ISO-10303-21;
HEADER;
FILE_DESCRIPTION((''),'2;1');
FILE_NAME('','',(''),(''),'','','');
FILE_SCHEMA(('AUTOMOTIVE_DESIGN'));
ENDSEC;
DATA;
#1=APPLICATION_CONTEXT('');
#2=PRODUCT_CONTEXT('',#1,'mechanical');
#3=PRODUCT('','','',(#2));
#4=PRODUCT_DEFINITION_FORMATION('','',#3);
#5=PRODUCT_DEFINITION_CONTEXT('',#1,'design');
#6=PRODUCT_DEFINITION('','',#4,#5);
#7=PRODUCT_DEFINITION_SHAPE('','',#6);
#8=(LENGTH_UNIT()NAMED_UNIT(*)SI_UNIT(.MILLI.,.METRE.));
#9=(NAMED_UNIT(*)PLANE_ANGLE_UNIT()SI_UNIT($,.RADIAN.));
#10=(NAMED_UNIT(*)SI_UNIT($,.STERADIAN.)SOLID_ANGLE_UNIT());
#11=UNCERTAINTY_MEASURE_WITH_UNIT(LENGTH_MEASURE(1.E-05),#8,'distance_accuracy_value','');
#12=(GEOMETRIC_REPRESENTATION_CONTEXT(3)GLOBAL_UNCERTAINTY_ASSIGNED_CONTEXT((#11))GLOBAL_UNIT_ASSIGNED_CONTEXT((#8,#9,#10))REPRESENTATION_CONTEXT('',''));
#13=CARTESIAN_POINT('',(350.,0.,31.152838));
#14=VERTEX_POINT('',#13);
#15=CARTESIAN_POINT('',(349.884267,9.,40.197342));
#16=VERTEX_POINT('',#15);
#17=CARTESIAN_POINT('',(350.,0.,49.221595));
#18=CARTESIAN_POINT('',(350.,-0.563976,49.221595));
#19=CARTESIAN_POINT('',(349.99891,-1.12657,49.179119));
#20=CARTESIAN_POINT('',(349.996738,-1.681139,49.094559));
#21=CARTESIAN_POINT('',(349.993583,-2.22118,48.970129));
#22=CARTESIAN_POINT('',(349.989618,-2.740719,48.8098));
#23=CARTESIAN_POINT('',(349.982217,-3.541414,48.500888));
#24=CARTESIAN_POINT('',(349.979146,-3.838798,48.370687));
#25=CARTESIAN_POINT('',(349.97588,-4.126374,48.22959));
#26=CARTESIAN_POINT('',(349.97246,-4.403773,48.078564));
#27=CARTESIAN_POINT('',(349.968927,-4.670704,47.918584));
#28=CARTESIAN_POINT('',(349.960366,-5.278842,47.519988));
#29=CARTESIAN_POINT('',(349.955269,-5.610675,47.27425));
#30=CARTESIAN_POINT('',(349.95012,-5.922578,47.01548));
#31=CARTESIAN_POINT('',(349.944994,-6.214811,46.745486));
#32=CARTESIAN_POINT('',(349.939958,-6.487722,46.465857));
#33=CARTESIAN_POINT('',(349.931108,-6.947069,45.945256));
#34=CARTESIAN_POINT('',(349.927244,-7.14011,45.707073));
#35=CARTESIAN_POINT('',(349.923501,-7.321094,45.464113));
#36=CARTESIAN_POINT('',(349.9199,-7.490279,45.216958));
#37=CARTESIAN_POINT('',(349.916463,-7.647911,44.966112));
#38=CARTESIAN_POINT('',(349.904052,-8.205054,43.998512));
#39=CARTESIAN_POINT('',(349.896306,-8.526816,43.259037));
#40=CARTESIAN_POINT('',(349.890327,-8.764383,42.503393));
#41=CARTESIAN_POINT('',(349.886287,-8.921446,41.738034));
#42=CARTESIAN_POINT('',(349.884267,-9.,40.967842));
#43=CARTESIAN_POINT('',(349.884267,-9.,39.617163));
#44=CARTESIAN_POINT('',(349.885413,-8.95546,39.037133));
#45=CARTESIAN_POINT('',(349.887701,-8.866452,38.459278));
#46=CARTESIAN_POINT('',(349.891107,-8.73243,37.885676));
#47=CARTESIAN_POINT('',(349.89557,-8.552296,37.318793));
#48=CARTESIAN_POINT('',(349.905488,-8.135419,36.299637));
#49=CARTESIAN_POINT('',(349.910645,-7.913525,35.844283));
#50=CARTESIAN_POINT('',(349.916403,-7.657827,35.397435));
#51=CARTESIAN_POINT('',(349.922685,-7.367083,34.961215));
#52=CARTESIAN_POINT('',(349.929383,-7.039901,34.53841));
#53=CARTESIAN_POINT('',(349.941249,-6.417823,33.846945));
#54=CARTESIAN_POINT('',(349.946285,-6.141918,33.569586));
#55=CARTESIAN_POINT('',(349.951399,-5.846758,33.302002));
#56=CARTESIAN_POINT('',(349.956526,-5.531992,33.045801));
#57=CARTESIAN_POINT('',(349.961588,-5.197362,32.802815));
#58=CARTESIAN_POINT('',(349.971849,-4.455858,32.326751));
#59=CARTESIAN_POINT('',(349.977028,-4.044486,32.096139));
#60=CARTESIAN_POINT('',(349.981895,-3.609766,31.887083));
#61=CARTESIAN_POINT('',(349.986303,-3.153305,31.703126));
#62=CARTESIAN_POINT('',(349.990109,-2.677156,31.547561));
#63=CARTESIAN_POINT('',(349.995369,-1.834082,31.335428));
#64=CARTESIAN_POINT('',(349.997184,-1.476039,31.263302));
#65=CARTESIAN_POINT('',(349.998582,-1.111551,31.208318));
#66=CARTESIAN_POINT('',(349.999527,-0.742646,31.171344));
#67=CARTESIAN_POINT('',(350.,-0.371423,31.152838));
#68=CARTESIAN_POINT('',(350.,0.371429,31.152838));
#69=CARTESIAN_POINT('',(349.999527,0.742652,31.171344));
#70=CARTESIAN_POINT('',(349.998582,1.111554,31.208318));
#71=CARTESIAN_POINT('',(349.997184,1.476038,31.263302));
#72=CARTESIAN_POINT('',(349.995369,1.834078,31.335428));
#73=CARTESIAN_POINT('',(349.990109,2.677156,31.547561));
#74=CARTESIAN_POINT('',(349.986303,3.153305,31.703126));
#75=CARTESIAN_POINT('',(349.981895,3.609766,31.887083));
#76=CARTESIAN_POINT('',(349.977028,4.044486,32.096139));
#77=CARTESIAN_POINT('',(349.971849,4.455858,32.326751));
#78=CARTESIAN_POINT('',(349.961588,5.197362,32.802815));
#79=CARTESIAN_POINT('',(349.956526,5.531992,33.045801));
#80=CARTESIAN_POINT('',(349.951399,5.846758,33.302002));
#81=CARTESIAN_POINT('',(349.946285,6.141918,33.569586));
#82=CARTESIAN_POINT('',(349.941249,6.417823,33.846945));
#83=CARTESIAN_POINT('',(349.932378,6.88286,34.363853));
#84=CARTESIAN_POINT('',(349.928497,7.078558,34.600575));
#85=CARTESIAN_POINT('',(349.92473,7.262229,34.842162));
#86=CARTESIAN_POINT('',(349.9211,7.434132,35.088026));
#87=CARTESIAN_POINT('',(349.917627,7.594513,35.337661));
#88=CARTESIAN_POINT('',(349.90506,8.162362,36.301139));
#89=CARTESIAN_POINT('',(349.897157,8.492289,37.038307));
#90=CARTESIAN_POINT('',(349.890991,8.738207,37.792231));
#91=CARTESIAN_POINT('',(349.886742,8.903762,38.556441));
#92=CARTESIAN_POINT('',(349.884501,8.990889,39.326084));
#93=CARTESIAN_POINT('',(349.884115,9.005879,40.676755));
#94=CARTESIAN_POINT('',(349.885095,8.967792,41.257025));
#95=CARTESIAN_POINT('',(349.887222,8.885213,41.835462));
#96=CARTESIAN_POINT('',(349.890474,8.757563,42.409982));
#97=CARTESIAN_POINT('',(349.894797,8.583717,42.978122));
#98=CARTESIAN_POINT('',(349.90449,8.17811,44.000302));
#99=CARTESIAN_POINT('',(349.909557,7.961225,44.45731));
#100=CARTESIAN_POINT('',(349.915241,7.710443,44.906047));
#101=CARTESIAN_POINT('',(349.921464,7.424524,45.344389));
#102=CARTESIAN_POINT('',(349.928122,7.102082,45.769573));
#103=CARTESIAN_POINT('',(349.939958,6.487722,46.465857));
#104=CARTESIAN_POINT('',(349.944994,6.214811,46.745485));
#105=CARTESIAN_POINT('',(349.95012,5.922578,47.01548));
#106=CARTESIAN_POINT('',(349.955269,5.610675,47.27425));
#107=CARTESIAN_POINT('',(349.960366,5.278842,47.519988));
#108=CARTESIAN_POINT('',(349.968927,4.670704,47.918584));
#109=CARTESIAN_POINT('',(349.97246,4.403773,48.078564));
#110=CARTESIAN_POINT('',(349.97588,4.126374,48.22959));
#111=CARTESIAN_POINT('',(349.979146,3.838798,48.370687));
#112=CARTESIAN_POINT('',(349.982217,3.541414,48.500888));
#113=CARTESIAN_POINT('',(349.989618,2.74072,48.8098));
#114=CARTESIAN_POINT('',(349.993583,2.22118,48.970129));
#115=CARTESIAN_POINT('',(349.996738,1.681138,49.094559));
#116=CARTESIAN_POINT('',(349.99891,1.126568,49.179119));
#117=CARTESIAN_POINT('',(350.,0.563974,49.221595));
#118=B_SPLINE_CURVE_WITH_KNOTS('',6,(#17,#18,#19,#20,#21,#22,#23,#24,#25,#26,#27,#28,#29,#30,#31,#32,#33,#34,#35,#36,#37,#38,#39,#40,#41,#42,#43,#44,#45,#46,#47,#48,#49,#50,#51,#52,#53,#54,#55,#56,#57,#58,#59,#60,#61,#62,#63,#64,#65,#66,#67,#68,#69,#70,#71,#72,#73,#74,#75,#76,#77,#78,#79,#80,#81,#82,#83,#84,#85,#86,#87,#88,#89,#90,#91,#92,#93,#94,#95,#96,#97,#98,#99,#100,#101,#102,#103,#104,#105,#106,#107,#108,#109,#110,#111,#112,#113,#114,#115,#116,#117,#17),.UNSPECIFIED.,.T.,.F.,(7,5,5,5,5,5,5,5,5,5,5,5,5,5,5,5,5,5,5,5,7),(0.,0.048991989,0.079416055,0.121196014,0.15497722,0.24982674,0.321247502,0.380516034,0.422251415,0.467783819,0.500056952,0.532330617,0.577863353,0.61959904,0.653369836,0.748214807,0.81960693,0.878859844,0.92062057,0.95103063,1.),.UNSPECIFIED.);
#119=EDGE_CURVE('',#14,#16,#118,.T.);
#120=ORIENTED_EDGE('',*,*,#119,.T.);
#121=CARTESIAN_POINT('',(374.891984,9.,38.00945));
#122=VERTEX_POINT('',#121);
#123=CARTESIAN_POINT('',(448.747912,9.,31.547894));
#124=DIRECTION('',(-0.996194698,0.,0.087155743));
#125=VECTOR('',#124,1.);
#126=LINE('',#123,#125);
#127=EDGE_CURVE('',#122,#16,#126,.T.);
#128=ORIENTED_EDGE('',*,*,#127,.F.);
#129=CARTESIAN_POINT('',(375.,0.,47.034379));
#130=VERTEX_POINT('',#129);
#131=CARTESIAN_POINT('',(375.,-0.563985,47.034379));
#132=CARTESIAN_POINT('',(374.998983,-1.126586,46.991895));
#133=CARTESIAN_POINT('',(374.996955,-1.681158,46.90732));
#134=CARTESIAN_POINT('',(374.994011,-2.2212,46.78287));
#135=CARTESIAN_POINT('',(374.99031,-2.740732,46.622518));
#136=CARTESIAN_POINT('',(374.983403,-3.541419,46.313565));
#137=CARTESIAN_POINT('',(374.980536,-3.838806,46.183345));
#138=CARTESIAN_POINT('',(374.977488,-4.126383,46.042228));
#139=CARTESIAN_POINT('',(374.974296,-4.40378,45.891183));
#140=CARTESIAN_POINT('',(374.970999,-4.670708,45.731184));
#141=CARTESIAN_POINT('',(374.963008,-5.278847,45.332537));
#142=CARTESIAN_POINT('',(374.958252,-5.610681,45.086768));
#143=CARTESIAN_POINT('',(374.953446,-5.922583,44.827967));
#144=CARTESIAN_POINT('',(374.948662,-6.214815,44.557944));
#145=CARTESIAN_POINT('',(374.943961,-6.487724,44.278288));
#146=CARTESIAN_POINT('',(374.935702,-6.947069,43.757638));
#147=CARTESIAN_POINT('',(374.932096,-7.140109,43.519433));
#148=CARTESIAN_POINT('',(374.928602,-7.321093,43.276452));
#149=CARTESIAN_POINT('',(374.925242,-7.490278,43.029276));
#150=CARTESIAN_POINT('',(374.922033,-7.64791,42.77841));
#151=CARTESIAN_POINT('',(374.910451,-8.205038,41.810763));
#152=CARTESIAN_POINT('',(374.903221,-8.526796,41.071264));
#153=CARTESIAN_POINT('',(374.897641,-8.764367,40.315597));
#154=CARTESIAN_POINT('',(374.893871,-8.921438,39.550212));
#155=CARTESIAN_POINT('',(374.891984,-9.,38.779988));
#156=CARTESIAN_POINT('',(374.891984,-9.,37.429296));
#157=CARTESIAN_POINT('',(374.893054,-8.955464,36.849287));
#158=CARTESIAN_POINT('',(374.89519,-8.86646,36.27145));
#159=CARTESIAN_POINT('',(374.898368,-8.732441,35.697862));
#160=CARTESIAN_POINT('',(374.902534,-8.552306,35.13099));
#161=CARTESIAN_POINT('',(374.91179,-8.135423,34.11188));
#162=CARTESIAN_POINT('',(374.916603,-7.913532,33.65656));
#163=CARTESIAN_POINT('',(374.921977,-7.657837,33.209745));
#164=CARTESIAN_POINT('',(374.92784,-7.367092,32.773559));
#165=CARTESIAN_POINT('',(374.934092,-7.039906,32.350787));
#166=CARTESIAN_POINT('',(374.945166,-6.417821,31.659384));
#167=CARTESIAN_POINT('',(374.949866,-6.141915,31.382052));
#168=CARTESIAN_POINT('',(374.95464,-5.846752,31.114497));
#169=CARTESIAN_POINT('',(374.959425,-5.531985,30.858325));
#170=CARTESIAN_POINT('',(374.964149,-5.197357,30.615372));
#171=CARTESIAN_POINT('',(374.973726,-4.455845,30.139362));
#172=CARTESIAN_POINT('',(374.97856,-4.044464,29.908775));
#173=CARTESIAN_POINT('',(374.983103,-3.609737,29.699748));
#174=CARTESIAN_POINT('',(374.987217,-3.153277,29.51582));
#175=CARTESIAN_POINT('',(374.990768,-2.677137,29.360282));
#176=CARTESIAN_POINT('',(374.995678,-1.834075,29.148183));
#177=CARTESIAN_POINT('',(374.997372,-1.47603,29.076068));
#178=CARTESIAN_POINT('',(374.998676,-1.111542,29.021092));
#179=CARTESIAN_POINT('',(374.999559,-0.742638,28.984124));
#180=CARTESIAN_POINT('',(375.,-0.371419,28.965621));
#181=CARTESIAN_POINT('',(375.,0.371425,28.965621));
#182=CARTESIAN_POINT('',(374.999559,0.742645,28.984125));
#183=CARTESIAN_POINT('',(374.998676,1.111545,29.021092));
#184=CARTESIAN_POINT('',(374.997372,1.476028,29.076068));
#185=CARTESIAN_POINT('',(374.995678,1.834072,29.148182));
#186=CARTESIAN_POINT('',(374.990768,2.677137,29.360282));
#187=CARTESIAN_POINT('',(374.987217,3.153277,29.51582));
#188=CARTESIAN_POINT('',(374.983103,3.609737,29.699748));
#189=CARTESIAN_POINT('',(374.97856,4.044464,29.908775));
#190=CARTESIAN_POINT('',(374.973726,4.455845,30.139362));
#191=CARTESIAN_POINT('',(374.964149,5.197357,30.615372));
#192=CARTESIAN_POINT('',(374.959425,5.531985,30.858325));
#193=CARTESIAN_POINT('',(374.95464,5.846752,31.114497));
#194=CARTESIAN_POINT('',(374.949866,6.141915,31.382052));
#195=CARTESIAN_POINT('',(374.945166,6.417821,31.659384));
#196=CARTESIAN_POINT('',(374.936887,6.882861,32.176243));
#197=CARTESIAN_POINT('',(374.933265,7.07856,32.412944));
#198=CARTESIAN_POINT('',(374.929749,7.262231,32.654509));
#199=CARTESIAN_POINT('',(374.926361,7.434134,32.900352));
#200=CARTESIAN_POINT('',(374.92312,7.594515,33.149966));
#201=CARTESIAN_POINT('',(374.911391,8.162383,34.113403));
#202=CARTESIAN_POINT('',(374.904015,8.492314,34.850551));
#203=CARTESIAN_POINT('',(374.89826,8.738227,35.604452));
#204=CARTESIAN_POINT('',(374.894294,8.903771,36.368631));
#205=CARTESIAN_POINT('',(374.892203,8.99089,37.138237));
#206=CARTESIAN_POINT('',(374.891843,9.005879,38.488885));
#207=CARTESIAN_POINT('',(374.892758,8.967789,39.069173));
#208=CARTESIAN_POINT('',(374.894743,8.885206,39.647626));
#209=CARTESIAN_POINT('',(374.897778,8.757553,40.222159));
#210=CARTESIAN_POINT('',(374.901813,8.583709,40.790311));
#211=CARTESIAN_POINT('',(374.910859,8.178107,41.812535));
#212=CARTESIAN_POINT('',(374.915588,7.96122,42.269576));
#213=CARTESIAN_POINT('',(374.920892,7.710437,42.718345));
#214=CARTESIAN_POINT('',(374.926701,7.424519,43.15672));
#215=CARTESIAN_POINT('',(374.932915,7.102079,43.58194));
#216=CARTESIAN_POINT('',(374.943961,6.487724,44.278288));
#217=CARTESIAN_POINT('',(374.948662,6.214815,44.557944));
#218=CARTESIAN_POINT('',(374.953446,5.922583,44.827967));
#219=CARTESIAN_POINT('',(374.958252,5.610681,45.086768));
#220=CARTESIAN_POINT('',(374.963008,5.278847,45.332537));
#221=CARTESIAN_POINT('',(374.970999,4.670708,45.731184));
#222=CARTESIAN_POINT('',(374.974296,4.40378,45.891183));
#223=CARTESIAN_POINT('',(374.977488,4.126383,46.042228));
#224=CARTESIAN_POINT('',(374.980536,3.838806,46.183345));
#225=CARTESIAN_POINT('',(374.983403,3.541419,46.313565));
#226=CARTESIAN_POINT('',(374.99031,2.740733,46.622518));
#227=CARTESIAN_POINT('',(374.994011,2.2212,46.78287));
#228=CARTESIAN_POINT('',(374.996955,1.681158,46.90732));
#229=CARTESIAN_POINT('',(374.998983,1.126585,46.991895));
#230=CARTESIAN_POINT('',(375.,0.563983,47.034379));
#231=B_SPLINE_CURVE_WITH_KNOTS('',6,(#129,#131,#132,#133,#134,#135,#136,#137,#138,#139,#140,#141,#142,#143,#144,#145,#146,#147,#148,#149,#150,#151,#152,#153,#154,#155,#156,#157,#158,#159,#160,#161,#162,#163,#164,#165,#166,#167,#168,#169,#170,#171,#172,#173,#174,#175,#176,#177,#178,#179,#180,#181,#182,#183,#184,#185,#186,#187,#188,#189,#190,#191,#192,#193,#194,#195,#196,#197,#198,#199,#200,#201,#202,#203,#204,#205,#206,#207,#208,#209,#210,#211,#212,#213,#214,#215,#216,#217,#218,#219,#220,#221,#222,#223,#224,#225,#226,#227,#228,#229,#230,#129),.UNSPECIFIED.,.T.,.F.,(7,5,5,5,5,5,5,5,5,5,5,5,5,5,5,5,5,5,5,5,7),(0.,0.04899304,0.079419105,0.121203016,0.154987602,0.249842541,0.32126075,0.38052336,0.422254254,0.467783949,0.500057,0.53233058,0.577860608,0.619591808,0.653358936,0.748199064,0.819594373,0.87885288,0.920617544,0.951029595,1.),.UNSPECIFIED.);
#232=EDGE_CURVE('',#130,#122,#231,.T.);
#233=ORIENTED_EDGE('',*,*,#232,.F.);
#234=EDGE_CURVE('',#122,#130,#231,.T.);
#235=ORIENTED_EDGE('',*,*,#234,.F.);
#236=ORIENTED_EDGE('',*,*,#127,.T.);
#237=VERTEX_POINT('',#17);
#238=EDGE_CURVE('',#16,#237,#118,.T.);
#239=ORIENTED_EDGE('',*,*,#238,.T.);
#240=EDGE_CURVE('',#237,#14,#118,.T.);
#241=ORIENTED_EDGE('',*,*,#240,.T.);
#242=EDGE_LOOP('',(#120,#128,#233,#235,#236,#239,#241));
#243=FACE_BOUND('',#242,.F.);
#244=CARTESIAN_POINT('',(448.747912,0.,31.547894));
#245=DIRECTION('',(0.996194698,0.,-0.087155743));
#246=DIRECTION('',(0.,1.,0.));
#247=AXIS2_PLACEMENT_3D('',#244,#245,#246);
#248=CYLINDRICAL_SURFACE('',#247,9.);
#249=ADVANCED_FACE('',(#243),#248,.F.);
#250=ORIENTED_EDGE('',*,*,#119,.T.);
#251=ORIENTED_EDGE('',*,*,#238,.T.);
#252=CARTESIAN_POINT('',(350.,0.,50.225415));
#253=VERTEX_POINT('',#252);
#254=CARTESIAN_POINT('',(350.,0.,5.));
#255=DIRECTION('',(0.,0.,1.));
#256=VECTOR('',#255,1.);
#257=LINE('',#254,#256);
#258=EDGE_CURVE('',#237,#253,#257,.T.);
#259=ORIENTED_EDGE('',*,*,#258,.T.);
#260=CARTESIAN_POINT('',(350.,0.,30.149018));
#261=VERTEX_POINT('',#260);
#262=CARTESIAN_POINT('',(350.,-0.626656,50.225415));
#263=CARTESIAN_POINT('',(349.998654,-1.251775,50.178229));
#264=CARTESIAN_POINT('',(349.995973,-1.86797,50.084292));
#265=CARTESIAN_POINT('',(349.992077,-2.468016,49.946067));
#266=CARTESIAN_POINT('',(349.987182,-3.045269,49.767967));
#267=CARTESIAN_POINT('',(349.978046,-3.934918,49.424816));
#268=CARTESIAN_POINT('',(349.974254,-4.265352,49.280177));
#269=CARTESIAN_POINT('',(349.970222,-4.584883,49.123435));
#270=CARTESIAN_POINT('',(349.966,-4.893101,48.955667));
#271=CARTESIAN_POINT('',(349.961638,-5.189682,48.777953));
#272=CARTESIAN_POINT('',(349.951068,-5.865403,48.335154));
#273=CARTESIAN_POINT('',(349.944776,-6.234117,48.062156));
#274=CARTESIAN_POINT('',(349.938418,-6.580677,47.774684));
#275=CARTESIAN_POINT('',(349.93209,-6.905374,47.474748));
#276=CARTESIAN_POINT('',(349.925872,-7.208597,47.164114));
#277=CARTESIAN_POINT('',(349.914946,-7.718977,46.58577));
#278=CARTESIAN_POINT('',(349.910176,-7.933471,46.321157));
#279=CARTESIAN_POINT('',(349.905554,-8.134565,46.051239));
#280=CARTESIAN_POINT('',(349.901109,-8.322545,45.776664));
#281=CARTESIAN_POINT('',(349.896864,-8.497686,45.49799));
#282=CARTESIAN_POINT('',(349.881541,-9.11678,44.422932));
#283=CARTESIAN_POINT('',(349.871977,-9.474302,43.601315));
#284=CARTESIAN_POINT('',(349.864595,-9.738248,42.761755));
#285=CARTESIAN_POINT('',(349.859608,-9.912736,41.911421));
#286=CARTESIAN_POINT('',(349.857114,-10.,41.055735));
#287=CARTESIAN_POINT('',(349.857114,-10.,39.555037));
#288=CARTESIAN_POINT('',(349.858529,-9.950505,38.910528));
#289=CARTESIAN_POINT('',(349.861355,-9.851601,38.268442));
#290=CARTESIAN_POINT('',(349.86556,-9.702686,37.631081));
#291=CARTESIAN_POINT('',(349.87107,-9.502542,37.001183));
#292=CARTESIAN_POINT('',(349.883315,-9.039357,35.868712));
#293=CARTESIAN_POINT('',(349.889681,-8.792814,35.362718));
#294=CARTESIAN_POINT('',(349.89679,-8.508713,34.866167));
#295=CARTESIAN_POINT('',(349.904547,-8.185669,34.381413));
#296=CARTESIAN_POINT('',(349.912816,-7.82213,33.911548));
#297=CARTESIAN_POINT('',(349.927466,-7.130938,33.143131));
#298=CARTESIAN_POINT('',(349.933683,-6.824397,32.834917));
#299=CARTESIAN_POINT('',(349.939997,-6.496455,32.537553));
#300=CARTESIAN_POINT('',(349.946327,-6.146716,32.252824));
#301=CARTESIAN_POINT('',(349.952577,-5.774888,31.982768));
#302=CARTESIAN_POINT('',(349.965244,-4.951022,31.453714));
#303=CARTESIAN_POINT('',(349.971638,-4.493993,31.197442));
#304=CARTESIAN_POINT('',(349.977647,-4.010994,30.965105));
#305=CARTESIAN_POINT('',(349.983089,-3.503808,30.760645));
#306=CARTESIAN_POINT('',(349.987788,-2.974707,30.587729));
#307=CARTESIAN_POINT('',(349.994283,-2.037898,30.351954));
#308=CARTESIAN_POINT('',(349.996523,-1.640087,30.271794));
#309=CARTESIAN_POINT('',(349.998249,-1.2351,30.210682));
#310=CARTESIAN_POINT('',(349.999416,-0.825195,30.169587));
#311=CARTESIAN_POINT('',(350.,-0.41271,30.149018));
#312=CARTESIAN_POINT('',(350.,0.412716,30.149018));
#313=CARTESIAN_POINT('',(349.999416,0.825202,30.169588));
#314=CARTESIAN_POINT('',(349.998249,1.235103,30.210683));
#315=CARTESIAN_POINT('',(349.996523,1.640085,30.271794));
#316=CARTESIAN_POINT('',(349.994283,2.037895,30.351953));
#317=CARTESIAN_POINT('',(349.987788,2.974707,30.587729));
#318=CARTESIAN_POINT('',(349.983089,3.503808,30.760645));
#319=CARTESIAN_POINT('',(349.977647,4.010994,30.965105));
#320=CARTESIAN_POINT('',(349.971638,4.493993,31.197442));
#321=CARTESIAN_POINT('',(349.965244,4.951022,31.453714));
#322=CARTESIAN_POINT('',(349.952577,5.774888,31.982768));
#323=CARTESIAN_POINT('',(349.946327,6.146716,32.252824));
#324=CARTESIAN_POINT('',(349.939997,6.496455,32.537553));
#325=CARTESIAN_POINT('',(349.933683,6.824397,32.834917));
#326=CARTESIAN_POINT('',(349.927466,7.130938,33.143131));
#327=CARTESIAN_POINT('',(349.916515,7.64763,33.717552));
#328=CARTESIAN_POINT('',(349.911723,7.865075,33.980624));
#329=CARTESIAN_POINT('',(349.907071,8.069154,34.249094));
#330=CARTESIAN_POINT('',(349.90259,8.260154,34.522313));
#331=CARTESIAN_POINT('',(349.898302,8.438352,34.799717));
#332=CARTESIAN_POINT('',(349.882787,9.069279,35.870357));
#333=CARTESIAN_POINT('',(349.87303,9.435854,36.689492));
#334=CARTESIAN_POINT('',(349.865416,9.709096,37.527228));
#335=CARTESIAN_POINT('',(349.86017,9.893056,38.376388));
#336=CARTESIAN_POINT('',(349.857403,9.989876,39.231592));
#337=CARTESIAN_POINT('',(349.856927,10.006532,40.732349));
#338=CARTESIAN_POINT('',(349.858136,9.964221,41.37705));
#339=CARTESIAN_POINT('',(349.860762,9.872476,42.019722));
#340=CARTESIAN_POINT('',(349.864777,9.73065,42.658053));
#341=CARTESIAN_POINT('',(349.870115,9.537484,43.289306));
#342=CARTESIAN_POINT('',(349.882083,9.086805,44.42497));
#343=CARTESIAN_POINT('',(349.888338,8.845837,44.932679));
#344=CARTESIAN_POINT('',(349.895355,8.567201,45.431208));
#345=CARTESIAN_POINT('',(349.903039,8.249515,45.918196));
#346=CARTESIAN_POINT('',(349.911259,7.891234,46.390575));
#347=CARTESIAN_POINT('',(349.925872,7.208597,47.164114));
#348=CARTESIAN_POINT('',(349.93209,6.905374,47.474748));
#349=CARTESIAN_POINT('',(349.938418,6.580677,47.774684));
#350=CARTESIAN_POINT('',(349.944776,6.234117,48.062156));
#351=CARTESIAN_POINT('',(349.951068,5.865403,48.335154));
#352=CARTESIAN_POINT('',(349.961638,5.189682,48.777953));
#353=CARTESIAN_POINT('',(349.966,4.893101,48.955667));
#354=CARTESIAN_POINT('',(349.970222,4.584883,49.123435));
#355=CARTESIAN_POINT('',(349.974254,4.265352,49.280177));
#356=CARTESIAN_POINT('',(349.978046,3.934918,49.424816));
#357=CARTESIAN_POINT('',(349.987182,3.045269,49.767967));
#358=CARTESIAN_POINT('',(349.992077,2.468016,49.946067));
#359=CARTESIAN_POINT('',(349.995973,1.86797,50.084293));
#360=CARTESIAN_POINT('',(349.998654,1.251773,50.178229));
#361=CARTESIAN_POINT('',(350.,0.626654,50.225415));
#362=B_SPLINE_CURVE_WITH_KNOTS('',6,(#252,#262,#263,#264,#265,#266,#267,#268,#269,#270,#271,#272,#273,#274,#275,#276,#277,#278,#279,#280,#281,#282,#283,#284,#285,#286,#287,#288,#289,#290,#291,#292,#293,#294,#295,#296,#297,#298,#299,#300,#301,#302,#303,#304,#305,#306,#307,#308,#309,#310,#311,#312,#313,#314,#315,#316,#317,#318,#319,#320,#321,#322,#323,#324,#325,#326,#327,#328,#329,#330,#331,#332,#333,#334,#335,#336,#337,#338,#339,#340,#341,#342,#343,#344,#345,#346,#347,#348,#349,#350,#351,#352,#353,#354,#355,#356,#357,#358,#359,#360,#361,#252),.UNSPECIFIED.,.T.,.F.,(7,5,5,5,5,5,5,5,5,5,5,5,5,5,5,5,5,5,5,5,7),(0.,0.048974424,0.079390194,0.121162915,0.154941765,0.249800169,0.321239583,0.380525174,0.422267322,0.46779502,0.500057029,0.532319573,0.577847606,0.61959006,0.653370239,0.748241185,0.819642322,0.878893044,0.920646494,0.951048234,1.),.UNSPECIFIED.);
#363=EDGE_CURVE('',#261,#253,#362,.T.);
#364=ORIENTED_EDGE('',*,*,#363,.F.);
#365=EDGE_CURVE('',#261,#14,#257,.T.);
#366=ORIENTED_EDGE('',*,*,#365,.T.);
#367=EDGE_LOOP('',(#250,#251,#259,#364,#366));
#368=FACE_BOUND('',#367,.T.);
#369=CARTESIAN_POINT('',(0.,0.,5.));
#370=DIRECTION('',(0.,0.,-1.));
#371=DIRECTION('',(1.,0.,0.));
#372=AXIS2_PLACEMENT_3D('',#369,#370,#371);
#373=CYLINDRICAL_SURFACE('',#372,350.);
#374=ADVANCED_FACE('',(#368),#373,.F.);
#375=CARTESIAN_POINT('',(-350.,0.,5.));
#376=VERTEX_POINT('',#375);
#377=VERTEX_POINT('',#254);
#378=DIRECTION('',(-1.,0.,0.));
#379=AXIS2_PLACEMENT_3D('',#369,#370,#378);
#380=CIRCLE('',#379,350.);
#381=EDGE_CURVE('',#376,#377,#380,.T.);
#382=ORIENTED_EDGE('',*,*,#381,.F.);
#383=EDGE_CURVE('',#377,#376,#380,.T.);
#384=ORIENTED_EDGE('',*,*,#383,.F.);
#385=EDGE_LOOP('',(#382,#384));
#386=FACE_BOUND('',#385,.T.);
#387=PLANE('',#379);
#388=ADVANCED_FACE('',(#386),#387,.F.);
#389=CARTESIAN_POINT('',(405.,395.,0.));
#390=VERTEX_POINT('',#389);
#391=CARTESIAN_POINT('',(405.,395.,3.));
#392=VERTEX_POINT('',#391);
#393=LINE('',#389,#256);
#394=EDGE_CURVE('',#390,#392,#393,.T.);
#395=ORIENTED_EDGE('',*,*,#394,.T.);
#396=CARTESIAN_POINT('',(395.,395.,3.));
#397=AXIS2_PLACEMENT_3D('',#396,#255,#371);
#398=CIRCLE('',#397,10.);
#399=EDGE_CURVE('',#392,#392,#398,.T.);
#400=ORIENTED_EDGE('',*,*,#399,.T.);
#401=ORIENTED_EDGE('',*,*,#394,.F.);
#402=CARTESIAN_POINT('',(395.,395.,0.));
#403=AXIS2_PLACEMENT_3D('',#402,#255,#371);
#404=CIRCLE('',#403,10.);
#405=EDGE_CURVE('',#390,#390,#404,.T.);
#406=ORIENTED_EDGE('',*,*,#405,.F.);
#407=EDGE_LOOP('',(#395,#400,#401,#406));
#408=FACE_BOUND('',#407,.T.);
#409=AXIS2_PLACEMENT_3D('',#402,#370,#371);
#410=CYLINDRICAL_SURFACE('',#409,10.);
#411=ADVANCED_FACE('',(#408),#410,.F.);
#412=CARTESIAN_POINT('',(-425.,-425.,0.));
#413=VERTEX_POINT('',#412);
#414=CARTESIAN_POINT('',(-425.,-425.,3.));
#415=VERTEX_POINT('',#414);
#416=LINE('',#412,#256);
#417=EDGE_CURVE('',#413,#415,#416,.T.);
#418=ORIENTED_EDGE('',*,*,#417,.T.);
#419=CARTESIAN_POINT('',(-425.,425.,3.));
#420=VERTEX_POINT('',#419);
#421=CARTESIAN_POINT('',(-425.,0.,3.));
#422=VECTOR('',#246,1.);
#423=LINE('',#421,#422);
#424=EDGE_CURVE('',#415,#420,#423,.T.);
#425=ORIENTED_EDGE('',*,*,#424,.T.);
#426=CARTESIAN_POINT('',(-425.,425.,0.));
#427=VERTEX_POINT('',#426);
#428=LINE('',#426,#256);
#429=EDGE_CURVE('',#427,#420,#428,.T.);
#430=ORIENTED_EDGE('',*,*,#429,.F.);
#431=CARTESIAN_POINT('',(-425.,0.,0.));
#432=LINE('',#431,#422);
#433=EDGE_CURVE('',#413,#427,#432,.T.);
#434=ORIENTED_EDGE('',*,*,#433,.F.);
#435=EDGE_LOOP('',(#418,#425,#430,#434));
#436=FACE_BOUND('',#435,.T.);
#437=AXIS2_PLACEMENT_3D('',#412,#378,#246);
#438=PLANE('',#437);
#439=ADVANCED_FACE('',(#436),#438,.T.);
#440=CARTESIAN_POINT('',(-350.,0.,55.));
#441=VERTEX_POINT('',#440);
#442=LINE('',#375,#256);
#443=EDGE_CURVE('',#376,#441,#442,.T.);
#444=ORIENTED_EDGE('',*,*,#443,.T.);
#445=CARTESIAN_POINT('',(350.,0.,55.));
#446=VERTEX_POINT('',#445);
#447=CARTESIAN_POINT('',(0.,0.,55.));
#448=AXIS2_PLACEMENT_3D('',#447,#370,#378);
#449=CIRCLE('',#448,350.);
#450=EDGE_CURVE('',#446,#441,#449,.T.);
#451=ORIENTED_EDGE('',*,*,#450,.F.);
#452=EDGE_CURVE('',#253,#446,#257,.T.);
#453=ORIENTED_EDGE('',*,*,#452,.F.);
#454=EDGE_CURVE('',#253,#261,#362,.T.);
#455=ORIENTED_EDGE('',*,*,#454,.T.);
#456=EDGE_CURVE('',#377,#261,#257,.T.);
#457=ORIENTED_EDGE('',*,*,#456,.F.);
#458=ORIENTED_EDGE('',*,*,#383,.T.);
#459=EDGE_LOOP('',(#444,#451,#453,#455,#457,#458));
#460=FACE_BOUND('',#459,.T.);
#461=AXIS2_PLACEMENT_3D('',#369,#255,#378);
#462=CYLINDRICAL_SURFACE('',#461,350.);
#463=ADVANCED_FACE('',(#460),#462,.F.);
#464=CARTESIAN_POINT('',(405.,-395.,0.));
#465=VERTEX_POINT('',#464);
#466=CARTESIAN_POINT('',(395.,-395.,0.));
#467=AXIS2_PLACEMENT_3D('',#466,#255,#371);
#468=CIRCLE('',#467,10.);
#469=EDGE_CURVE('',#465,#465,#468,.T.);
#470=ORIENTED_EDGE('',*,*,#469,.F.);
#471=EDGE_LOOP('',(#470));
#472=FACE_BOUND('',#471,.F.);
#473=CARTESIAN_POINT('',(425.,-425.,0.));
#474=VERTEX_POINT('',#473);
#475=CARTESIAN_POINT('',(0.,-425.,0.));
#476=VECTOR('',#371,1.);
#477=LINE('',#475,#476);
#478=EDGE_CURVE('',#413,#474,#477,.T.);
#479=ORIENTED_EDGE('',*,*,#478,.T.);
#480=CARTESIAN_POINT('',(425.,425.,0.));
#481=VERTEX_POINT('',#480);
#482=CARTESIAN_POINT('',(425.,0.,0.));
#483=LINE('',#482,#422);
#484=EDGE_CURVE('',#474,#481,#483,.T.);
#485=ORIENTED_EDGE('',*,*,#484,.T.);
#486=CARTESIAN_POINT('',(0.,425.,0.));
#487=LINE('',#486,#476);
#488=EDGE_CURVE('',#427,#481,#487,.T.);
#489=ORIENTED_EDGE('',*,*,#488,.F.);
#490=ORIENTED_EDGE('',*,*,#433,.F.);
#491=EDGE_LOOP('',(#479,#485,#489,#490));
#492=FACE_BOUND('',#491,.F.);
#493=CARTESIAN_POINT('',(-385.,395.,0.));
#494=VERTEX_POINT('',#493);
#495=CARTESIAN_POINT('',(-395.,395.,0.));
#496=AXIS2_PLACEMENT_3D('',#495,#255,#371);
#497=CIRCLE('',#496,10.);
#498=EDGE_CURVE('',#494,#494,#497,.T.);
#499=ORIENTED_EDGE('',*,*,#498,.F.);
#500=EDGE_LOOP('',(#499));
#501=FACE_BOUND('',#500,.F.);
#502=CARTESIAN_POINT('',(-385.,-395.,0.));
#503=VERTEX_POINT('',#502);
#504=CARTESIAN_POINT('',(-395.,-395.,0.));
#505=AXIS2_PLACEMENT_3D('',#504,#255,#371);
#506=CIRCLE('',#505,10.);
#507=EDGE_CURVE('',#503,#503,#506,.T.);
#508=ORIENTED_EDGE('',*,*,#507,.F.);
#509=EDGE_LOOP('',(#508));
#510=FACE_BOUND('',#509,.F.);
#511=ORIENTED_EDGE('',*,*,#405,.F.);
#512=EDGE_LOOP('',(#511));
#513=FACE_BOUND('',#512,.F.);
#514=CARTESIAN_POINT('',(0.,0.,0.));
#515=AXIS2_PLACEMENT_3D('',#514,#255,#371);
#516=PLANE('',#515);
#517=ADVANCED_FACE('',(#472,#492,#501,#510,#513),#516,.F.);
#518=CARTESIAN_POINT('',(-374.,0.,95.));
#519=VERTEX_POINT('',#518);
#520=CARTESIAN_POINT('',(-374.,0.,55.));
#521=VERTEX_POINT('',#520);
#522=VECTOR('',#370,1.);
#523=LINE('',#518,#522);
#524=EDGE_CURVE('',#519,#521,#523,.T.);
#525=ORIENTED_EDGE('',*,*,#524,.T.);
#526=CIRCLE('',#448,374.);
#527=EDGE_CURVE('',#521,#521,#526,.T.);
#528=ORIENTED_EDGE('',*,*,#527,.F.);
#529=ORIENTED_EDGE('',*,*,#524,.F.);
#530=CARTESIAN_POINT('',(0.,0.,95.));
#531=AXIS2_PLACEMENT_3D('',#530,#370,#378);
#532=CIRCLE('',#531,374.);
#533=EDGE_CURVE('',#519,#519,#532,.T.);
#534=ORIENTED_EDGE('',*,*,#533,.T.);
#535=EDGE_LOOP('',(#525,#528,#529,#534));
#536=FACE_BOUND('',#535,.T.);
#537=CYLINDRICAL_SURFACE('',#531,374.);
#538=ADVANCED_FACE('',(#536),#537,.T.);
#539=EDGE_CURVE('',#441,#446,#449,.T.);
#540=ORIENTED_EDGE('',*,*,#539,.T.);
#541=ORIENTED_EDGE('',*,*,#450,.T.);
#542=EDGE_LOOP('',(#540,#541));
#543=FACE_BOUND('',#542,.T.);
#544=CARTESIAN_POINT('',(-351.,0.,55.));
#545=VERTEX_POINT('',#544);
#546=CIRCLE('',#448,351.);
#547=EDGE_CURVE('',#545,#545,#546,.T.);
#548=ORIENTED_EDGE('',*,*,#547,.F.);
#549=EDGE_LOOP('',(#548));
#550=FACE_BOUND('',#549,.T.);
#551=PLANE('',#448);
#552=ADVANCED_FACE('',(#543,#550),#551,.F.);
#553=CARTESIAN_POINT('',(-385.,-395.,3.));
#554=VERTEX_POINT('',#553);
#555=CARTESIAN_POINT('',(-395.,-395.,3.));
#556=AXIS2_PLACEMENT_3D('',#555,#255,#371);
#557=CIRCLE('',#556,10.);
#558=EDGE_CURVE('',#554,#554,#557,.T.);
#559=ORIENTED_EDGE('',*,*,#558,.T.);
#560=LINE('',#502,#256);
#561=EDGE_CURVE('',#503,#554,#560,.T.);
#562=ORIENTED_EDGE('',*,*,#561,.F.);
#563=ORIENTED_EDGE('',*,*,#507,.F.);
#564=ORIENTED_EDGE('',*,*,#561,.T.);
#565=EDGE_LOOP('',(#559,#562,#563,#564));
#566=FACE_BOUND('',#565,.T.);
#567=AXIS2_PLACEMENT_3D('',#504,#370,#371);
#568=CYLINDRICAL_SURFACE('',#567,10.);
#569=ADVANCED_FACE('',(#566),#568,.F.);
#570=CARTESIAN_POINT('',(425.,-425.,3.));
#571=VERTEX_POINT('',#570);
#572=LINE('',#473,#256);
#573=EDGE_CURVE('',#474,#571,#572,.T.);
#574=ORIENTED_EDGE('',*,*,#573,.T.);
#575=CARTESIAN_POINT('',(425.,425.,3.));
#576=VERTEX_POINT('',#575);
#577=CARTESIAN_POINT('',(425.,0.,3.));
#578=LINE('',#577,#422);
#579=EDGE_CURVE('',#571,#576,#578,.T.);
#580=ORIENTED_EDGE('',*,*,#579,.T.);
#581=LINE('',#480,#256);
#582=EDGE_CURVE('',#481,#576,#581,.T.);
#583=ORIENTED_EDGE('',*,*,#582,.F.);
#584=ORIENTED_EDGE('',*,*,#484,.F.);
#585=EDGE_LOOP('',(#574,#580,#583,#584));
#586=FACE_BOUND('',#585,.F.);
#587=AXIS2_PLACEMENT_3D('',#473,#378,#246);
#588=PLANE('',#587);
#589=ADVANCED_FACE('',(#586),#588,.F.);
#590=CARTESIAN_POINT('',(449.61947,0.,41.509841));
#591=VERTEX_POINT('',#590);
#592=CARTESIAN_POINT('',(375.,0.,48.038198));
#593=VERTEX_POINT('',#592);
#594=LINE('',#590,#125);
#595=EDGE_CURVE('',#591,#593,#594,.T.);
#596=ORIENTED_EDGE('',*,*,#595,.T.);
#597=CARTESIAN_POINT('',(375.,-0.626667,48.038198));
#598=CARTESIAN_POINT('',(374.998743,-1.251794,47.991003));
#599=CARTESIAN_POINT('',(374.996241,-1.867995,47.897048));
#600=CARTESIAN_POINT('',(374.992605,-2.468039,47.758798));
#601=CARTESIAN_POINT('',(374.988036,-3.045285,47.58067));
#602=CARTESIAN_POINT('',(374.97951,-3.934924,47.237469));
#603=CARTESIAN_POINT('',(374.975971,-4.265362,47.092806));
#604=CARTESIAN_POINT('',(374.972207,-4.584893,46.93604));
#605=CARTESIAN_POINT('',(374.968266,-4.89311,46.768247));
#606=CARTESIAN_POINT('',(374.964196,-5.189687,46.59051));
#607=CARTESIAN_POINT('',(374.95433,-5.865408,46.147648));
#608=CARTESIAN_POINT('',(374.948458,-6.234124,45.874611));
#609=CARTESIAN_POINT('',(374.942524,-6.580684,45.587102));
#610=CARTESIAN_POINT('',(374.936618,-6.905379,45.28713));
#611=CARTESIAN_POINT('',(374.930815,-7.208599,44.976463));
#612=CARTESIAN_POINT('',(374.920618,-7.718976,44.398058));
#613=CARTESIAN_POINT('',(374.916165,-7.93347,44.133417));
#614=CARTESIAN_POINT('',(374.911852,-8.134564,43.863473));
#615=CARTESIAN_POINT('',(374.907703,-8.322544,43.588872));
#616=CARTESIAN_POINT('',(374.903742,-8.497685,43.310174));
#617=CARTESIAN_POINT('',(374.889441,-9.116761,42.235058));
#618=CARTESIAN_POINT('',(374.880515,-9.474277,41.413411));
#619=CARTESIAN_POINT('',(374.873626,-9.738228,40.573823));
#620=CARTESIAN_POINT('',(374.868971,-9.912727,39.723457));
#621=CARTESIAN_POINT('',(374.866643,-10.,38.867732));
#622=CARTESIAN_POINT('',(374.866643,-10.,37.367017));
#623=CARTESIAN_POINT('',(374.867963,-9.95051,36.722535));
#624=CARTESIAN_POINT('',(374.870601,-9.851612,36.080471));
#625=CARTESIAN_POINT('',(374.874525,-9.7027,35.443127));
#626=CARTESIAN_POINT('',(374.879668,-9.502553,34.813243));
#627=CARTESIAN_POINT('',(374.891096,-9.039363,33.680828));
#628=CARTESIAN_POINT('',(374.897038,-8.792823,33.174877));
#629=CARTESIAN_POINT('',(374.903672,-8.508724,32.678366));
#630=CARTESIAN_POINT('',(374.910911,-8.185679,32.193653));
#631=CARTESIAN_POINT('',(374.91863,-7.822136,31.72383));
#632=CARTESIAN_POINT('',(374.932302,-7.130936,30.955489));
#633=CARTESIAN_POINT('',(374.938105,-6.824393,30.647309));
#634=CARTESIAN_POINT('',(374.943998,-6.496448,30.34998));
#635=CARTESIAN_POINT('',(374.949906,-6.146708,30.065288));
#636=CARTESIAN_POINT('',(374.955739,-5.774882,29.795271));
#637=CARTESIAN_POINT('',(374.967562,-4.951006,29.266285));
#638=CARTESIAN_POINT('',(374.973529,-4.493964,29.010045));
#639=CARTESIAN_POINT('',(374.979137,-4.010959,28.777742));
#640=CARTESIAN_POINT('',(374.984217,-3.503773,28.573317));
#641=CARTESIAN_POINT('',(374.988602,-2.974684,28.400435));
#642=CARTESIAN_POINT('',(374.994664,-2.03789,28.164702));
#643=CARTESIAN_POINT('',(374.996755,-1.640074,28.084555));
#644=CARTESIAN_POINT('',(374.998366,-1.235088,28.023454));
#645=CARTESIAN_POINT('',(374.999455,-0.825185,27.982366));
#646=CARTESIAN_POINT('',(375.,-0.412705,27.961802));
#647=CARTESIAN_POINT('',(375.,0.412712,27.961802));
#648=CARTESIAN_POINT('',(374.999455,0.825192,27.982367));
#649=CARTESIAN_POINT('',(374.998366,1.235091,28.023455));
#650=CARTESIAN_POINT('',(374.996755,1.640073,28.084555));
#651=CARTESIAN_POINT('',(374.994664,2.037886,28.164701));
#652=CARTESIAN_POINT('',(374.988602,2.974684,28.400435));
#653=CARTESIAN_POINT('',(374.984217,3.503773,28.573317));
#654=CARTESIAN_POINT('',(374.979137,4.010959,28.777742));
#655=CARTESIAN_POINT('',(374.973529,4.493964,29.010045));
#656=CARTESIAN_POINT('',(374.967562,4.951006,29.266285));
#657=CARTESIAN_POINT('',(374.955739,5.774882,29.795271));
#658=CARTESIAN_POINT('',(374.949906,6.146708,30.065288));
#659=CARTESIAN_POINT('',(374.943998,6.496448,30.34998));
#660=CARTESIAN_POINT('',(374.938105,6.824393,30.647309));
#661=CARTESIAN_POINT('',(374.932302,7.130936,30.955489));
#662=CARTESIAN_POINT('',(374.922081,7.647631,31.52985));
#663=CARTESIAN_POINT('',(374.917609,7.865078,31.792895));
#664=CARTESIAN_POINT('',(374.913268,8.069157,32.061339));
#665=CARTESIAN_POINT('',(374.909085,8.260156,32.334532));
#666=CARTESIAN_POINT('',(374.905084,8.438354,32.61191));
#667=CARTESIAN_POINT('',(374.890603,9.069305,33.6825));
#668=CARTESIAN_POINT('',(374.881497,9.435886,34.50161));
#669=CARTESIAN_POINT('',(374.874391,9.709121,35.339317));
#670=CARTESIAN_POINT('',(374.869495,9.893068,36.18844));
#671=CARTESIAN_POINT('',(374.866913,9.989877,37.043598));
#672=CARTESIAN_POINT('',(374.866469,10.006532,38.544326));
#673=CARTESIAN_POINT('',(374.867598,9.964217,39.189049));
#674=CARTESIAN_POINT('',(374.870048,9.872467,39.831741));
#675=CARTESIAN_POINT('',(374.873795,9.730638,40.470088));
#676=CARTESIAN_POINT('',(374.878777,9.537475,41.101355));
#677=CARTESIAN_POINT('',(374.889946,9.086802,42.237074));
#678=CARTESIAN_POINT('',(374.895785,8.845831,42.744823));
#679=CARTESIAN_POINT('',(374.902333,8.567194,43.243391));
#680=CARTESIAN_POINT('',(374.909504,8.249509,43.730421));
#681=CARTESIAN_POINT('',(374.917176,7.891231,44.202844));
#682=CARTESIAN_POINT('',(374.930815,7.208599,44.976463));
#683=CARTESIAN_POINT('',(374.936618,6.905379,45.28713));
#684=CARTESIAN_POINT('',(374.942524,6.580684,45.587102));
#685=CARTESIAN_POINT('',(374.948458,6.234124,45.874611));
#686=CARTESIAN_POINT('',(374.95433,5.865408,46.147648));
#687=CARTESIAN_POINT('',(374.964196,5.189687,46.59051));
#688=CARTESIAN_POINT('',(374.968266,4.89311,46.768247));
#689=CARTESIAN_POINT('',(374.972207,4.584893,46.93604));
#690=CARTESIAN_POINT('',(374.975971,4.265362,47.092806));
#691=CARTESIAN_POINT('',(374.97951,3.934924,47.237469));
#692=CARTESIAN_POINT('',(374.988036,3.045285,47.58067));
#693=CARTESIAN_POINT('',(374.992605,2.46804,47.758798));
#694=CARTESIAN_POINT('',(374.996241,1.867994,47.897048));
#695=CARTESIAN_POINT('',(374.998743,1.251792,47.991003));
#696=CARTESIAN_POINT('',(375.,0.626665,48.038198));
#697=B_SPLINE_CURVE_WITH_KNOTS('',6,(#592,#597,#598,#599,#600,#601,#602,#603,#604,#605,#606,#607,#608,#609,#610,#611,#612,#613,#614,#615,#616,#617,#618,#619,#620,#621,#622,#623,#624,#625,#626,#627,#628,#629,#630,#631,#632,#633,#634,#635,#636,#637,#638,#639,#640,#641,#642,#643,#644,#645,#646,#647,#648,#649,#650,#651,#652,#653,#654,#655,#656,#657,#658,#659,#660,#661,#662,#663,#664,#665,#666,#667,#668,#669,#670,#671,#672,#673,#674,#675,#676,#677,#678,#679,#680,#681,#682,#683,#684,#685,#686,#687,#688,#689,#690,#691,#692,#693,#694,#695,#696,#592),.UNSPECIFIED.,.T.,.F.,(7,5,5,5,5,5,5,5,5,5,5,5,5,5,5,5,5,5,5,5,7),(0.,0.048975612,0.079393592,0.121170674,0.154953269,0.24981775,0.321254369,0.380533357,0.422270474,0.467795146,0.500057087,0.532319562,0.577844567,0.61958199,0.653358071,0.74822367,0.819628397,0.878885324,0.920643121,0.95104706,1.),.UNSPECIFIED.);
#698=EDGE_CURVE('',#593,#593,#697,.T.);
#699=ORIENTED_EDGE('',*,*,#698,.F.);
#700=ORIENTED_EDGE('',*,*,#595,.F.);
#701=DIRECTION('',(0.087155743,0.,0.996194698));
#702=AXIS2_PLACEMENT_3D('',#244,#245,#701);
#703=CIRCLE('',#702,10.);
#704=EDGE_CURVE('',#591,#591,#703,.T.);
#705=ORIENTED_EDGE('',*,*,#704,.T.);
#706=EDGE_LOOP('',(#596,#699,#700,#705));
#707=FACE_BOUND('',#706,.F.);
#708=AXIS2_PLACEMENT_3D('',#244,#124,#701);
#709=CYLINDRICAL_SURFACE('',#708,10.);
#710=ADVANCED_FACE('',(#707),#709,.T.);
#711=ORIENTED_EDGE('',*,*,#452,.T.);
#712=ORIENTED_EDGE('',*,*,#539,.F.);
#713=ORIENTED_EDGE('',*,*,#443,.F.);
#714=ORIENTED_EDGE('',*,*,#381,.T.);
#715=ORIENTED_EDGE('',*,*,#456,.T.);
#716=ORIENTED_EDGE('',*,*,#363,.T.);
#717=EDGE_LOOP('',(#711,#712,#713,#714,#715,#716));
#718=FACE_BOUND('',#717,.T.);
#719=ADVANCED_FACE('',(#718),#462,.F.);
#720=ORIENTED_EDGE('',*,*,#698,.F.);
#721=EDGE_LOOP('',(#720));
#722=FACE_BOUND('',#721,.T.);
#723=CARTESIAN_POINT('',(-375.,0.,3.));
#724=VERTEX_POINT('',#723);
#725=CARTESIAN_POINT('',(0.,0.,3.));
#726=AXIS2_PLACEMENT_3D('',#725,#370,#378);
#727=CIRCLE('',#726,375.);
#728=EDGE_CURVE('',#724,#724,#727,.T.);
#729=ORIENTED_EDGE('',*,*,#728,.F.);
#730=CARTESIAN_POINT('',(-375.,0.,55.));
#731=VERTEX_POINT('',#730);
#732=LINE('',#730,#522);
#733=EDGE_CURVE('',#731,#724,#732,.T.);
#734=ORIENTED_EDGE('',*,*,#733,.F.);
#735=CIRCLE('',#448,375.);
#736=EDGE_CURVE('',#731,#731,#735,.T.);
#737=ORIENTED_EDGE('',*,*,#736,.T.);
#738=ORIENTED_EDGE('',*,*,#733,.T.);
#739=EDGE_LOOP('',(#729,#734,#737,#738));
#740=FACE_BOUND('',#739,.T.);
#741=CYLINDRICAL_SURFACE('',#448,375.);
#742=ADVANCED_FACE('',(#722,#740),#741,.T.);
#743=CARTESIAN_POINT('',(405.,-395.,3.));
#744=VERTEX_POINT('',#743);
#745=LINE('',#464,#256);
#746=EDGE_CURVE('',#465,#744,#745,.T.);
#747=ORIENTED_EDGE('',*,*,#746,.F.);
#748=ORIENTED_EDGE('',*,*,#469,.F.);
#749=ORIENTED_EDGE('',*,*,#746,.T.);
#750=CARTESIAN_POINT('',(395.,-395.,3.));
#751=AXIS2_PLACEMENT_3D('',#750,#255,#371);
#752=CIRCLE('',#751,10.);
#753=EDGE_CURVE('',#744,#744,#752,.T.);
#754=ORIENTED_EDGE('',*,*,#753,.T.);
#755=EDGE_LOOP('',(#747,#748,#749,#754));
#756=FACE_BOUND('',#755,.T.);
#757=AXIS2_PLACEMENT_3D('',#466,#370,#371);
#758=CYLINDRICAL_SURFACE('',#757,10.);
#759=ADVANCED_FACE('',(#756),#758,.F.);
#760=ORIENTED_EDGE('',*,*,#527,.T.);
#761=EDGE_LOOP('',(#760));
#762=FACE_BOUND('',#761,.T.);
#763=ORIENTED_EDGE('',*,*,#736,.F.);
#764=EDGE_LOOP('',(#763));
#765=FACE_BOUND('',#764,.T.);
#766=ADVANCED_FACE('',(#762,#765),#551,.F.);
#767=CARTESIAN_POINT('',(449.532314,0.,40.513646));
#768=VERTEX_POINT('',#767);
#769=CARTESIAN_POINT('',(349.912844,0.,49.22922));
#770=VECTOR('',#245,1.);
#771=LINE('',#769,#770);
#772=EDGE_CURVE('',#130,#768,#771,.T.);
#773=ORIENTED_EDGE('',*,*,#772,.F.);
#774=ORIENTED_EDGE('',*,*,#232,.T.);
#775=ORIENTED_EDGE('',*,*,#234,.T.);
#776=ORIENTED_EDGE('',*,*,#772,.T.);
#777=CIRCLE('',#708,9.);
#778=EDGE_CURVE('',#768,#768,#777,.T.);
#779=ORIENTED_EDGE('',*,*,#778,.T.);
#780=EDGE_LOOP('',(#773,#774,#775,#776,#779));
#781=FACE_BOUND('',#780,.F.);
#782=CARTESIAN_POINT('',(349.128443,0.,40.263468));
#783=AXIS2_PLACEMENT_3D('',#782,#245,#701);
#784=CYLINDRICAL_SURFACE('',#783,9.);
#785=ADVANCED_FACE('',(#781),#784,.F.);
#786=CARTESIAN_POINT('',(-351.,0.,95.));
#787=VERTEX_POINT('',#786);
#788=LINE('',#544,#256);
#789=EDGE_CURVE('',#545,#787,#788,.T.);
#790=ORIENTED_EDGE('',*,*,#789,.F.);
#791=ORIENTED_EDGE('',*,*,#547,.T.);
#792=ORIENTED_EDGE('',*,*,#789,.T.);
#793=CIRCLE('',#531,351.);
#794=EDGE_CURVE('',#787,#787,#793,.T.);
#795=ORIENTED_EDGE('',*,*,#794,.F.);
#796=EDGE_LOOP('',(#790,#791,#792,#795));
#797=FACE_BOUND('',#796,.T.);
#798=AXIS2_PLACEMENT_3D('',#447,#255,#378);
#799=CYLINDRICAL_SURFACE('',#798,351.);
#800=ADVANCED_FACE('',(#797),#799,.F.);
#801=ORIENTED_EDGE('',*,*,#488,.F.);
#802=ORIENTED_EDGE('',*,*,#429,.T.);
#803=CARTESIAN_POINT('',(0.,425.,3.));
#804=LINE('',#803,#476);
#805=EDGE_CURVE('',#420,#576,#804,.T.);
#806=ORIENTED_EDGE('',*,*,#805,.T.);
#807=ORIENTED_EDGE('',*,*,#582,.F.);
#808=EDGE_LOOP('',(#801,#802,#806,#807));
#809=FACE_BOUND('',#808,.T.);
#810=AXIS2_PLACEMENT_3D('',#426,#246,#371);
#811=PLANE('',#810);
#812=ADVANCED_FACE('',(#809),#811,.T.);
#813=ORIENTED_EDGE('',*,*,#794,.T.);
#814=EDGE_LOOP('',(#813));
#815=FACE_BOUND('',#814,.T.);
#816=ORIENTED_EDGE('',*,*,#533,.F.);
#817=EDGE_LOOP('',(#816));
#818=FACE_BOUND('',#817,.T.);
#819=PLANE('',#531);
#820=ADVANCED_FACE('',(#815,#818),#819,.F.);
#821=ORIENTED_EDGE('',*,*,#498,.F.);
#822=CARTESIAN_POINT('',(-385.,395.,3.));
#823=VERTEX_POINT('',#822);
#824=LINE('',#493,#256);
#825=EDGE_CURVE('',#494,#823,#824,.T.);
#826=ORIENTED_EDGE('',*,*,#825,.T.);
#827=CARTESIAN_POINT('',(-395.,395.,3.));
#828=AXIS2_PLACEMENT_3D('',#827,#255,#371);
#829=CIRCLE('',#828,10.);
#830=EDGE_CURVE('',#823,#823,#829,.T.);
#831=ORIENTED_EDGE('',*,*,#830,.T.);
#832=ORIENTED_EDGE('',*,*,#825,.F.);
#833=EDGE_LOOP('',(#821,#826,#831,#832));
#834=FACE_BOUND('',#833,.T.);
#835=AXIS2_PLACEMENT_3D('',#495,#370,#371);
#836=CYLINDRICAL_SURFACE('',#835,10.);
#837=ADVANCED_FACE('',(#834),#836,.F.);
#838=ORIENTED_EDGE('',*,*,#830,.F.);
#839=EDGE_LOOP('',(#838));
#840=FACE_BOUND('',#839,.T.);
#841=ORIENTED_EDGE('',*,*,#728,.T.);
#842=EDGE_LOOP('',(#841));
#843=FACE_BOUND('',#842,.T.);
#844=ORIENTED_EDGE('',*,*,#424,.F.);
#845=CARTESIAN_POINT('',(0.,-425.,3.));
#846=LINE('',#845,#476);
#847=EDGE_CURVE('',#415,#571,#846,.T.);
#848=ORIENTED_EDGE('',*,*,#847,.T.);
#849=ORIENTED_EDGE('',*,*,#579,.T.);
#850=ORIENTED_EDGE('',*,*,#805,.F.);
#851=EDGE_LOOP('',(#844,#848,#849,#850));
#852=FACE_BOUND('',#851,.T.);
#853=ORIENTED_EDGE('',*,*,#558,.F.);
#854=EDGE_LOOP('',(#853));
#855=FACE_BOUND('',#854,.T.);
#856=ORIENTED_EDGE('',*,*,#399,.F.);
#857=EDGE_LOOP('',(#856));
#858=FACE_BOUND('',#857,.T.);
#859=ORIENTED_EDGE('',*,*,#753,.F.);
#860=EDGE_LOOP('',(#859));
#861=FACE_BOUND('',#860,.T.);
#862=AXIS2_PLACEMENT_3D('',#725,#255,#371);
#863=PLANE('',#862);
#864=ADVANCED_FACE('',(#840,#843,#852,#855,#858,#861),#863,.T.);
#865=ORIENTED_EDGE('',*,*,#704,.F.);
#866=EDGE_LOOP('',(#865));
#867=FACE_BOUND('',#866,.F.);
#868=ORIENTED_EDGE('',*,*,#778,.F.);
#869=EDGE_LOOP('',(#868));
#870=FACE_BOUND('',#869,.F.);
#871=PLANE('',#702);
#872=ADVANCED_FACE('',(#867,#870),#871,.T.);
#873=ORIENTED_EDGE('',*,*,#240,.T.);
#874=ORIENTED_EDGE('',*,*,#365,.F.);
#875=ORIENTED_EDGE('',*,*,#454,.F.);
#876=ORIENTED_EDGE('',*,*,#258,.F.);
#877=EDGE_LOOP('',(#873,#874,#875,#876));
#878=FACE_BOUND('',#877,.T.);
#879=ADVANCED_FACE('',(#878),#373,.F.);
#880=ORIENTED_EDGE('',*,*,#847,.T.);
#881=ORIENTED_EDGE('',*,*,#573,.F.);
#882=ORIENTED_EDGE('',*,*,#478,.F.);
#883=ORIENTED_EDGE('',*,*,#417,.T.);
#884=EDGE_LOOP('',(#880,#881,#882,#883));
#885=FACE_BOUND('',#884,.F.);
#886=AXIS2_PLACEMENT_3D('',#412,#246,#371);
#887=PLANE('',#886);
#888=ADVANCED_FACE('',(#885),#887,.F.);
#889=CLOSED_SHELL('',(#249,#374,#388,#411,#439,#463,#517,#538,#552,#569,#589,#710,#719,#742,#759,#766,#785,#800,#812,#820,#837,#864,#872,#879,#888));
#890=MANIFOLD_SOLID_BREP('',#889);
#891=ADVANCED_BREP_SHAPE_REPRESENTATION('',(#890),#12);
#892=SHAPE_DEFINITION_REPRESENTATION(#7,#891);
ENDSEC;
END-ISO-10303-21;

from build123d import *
from build123d import SkipClean  # not in build123d's __all__

# Parameters (mm, degrees)
F0_W     = 10
F0_H     = 3
F2_W     = 850
F2_H     = 850
F2_R     = 10
F3_DEPTH = 3
F6_R     = 9
F7_DEPTH = 120
F8_R     = 350
F9_DEPTH = 200


with BuildPart() as f1:
    # F0 (on Front) → F1 (revolve)
    with BuildSketch(Plane.XZ):
        Polygon((-375, 5), (-350, 5), (-350, 55), (-351, 55), (-351, 95), (-374, 95), (-374, 55), (-375, 55), align=None)
        Polygon((-10, 5), (-350, 5), (-375, 5), (-375, 2), (-10, 2), align=None)
        with Locations((-5, 3.5)):
            Rectangle(F0_W, F0_H)
    revolve(axis=Axis((0, 0, 187.9212413023), (0, 0, -1)))

    # F2 (on Top) → F3 (join)
    with BuildSketch(Plane.XY):
        Rectangle(F2_W, F2_H)
        with Locations((-395, -395)):
            Circle(F2_R, mode=Mode.SUBTRACT)
        with Locations((395, -395)):
            Circle(F2_R, mode=Mode.SUBTRACT)
        with Locations((-395, 395)):
            Circle(F2_R, mode=Mode.SUBTRACT)
        with Locations((395, 395)):
            Circle(F2_R, mode=Mode.SUBTRACT)
    extrude(amount=F3_DEPTH)

    # F4 (on Front) → F5 (revolve)
    with BuildSketch(Plane.XZ):
        Polygon((449.6194698092, 41.5098406888), (350, 50.2254149636), (349.9128442573, 49.2292202655), (449.5323140664, 40.5136459907), align=None)
    revolve(axis=Axis((462.7442754949, 0, 30.3233706049), (0.9961946981, 0, -0.0871557427)))

    # F6 (on face) → F7 (cut)
    with BuildSketch(Plane(origin=(442.6000506958, 0, -38.7224869119), x_dir=(0, 1, 0), z_dir=(0.9961946981, 0, -0.0871557427))):
        with Locations((0, 70.5388020579)):
            Circle(F6_R)
    extrude(amount=-F7_DEPTH, mode=Mode.SUBTRACT)

    # F8 (on face) → F9 (cut)
    with BuildSketch(Plane.XY.offset(5)):
        Circle(F8_R)
    with SkipClean():  # cleaning this boolean's faces spoils the solid; the shape is the same uncleaned
        extrude(amount=F9_DEPTH, mode=Mode.SUBTRACT)


solid = f1.part
